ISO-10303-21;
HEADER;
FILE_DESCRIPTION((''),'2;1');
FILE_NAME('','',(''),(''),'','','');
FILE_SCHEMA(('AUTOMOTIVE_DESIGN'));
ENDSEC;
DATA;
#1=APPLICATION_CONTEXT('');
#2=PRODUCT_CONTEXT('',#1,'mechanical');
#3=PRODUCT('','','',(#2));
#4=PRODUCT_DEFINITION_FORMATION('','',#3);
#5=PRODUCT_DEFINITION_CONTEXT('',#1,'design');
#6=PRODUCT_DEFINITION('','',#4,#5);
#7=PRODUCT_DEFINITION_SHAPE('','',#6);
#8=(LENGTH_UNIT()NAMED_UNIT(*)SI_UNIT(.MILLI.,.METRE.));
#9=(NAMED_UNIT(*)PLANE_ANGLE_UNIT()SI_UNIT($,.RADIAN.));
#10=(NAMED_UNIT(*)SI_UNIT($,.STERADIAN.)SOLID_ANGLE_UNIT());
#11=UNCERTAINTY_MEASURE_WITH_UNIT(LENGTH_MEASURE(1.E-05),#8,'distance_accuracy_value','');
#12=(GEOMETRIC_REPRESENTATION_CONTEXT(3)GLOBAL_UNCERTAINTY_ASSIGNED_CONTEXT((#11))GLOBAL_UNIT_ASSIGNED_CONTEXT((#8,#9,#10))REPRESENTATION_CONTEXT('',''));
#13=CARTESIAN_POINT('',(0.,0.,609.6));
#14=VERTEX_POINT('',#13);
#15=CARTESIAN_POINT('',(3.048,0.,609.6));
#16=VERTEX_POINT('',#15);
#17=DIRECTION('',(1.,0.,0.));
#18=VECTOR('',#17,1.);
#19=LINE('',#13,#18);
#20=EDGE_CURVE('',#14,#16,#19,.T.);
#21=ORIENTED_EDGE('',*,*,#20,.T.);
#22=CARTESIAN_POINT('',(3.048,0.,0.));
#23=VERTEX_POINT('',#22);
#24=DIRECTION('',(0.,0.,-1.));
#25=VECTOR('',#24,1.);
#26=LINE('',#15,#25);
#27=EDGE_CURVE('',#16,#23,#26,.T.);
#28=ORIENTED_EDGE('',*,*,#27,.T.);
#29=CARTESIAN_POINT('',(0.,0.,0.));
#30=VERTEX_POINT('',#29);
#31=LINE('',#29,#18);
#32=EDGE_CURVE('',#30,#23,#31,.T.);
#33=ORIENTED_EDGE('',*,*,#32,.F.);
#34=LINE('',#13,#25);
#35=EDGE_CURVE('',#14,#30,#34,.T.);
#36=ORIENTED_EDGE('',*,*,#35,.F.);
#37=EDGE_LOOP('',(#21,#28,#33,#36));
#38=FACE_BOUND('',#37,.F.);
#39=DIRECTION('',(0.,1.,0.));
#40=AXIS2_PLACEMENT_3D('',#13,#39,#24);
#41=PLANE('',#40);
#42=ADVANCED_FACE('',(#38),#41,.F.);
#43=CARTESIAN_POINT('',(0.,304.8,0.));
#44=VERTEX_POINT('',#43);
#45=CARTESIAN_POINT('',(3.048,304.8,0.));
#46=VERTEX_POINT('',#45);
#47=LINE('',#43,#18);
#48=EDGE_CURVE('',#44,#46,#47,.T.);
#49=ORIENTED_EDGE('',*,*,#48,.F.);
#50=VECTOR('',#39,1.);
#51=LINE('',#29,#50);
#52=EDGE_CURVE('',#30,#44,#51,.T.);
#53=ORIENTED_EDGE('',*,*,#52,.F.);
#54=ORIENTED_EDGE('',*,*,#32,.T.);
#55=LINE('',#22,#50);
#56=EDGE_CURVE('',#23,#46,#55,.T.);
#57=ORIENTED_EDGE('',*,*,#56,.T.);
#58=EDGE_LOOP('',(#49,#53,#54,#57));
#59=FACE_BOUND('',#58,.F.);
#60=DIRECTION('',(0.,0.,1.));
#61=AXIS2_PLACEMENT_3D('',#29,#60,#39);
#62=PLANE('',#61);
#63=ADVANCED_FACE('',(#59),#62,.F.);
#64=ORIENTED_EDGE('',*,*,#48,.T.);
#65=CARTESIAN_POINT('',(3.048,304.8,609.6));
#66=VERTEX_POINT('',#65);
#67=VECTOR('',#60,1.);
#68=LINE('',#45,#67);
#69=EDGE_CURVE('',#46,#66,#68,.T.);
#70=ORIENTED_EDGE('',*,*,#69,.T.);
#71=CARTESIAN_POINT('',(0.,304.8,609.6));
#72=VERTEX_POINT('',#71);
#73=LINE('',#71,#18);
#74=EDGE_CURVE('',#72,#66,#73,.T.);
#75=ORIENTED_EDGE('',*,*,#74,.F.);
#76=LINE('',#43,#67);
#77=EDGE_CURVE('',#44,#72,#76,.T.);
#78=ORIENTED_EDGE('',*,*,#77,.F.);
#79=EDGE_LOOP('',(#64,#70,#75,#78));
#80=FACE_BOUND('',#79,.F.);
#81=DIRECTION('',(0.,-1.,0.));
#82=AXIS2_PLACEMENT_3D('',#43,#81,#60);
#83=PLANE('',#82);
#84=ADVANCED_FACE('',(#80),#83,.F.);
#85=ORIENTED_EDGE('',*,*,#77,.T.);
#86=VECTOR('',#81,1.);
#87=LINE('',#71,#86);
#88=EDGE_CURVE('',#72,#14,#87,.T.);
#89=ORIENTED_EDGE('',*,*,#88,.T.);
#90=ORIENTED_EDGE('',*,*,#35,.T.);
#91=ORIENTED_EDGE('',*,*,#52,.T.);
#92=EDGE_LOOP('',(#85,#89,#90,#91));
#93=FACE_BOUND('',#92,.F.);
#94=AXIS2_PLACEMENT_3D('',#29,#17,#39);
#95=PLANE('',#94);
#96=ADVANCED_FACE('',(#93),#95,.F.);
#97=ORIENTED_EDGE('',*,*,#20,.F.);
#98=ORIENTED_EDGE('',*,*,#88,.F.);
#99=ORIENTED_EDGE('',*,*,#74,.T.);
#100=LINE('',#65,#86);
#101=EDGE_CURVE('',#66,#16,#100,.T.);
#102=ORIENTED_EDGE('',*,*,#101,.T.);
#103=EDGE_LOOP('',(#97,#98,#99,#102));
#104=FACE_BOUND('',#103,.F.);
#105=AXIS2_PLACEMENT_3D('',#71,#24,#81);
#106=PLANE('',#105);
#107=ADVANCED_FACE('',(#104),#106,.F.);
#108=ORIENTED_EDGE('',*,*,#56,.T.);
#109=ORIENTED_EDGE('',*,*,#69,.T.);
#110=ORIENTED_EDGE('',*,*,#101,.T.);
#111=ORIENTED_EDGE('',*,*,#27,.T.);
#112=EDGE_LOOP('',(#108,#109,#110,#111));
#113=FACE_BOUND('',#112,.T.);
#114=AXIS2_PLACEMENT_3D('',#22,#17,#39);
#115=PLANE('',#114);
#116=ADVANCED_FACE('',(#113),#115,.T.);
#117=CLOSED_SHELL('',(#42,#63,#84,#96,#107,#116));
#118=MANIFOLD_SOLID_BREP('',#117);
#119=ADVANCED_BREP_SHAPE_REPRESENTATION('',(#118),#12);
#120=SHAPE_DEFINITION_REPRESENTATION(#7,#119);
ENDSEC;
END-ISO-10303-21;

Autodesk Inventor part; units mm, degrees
ref_plane "YZ Plane" through (0, 0, 0) normal (1, 0, 0) x (0, 1, 0)
ref_plane "XZ Plane" through (0, 0, 0) normal (0, 1, 0) x (-1, 0, 0)
ref_plane "XY Plane" through (0, 0, 0) normal (0, 0, 1) x (1, 0, 0)
sketch "Sketch1" plane through (0, 0, 0) normal (1, 0, 0) x (0, 1, 0)
  line L0 (0, 0) -> (304.8, 0)
  line L1 (304.8, 0) -> (304.8, 609.6)
  line L2 (304.8, 609.6) -> (0, 609.6)
  line L3 (0, 609.6) -> (0, 0)
  dimension "d0" = 304.8
  dimension "d1" = 609.6
extrude "Plate1" add sketch "Sketch1" along normal blind 3.048
equation "\"BendRadius\" = Thickness"
equation "\"BendReliefWidth\" = Thickness"
equation "\"BendReliefDepth\" = 0.5 * Thickness"
equation "\"CornerReliefSize\" = 4 * Thickness"
equation "\"MinimumRemnant\" = 2 * Thickness"
equation "\"TransitionRadius\" = BendRadius"
equation "\"JacobiRadiusSize\" = BendRadius"
equation "\"GapSize\" = Thickness"
equation "\"d2\" = BendRadius"
equation "\"Thickness\" = 3.048"
properties part number "Blast sides"
